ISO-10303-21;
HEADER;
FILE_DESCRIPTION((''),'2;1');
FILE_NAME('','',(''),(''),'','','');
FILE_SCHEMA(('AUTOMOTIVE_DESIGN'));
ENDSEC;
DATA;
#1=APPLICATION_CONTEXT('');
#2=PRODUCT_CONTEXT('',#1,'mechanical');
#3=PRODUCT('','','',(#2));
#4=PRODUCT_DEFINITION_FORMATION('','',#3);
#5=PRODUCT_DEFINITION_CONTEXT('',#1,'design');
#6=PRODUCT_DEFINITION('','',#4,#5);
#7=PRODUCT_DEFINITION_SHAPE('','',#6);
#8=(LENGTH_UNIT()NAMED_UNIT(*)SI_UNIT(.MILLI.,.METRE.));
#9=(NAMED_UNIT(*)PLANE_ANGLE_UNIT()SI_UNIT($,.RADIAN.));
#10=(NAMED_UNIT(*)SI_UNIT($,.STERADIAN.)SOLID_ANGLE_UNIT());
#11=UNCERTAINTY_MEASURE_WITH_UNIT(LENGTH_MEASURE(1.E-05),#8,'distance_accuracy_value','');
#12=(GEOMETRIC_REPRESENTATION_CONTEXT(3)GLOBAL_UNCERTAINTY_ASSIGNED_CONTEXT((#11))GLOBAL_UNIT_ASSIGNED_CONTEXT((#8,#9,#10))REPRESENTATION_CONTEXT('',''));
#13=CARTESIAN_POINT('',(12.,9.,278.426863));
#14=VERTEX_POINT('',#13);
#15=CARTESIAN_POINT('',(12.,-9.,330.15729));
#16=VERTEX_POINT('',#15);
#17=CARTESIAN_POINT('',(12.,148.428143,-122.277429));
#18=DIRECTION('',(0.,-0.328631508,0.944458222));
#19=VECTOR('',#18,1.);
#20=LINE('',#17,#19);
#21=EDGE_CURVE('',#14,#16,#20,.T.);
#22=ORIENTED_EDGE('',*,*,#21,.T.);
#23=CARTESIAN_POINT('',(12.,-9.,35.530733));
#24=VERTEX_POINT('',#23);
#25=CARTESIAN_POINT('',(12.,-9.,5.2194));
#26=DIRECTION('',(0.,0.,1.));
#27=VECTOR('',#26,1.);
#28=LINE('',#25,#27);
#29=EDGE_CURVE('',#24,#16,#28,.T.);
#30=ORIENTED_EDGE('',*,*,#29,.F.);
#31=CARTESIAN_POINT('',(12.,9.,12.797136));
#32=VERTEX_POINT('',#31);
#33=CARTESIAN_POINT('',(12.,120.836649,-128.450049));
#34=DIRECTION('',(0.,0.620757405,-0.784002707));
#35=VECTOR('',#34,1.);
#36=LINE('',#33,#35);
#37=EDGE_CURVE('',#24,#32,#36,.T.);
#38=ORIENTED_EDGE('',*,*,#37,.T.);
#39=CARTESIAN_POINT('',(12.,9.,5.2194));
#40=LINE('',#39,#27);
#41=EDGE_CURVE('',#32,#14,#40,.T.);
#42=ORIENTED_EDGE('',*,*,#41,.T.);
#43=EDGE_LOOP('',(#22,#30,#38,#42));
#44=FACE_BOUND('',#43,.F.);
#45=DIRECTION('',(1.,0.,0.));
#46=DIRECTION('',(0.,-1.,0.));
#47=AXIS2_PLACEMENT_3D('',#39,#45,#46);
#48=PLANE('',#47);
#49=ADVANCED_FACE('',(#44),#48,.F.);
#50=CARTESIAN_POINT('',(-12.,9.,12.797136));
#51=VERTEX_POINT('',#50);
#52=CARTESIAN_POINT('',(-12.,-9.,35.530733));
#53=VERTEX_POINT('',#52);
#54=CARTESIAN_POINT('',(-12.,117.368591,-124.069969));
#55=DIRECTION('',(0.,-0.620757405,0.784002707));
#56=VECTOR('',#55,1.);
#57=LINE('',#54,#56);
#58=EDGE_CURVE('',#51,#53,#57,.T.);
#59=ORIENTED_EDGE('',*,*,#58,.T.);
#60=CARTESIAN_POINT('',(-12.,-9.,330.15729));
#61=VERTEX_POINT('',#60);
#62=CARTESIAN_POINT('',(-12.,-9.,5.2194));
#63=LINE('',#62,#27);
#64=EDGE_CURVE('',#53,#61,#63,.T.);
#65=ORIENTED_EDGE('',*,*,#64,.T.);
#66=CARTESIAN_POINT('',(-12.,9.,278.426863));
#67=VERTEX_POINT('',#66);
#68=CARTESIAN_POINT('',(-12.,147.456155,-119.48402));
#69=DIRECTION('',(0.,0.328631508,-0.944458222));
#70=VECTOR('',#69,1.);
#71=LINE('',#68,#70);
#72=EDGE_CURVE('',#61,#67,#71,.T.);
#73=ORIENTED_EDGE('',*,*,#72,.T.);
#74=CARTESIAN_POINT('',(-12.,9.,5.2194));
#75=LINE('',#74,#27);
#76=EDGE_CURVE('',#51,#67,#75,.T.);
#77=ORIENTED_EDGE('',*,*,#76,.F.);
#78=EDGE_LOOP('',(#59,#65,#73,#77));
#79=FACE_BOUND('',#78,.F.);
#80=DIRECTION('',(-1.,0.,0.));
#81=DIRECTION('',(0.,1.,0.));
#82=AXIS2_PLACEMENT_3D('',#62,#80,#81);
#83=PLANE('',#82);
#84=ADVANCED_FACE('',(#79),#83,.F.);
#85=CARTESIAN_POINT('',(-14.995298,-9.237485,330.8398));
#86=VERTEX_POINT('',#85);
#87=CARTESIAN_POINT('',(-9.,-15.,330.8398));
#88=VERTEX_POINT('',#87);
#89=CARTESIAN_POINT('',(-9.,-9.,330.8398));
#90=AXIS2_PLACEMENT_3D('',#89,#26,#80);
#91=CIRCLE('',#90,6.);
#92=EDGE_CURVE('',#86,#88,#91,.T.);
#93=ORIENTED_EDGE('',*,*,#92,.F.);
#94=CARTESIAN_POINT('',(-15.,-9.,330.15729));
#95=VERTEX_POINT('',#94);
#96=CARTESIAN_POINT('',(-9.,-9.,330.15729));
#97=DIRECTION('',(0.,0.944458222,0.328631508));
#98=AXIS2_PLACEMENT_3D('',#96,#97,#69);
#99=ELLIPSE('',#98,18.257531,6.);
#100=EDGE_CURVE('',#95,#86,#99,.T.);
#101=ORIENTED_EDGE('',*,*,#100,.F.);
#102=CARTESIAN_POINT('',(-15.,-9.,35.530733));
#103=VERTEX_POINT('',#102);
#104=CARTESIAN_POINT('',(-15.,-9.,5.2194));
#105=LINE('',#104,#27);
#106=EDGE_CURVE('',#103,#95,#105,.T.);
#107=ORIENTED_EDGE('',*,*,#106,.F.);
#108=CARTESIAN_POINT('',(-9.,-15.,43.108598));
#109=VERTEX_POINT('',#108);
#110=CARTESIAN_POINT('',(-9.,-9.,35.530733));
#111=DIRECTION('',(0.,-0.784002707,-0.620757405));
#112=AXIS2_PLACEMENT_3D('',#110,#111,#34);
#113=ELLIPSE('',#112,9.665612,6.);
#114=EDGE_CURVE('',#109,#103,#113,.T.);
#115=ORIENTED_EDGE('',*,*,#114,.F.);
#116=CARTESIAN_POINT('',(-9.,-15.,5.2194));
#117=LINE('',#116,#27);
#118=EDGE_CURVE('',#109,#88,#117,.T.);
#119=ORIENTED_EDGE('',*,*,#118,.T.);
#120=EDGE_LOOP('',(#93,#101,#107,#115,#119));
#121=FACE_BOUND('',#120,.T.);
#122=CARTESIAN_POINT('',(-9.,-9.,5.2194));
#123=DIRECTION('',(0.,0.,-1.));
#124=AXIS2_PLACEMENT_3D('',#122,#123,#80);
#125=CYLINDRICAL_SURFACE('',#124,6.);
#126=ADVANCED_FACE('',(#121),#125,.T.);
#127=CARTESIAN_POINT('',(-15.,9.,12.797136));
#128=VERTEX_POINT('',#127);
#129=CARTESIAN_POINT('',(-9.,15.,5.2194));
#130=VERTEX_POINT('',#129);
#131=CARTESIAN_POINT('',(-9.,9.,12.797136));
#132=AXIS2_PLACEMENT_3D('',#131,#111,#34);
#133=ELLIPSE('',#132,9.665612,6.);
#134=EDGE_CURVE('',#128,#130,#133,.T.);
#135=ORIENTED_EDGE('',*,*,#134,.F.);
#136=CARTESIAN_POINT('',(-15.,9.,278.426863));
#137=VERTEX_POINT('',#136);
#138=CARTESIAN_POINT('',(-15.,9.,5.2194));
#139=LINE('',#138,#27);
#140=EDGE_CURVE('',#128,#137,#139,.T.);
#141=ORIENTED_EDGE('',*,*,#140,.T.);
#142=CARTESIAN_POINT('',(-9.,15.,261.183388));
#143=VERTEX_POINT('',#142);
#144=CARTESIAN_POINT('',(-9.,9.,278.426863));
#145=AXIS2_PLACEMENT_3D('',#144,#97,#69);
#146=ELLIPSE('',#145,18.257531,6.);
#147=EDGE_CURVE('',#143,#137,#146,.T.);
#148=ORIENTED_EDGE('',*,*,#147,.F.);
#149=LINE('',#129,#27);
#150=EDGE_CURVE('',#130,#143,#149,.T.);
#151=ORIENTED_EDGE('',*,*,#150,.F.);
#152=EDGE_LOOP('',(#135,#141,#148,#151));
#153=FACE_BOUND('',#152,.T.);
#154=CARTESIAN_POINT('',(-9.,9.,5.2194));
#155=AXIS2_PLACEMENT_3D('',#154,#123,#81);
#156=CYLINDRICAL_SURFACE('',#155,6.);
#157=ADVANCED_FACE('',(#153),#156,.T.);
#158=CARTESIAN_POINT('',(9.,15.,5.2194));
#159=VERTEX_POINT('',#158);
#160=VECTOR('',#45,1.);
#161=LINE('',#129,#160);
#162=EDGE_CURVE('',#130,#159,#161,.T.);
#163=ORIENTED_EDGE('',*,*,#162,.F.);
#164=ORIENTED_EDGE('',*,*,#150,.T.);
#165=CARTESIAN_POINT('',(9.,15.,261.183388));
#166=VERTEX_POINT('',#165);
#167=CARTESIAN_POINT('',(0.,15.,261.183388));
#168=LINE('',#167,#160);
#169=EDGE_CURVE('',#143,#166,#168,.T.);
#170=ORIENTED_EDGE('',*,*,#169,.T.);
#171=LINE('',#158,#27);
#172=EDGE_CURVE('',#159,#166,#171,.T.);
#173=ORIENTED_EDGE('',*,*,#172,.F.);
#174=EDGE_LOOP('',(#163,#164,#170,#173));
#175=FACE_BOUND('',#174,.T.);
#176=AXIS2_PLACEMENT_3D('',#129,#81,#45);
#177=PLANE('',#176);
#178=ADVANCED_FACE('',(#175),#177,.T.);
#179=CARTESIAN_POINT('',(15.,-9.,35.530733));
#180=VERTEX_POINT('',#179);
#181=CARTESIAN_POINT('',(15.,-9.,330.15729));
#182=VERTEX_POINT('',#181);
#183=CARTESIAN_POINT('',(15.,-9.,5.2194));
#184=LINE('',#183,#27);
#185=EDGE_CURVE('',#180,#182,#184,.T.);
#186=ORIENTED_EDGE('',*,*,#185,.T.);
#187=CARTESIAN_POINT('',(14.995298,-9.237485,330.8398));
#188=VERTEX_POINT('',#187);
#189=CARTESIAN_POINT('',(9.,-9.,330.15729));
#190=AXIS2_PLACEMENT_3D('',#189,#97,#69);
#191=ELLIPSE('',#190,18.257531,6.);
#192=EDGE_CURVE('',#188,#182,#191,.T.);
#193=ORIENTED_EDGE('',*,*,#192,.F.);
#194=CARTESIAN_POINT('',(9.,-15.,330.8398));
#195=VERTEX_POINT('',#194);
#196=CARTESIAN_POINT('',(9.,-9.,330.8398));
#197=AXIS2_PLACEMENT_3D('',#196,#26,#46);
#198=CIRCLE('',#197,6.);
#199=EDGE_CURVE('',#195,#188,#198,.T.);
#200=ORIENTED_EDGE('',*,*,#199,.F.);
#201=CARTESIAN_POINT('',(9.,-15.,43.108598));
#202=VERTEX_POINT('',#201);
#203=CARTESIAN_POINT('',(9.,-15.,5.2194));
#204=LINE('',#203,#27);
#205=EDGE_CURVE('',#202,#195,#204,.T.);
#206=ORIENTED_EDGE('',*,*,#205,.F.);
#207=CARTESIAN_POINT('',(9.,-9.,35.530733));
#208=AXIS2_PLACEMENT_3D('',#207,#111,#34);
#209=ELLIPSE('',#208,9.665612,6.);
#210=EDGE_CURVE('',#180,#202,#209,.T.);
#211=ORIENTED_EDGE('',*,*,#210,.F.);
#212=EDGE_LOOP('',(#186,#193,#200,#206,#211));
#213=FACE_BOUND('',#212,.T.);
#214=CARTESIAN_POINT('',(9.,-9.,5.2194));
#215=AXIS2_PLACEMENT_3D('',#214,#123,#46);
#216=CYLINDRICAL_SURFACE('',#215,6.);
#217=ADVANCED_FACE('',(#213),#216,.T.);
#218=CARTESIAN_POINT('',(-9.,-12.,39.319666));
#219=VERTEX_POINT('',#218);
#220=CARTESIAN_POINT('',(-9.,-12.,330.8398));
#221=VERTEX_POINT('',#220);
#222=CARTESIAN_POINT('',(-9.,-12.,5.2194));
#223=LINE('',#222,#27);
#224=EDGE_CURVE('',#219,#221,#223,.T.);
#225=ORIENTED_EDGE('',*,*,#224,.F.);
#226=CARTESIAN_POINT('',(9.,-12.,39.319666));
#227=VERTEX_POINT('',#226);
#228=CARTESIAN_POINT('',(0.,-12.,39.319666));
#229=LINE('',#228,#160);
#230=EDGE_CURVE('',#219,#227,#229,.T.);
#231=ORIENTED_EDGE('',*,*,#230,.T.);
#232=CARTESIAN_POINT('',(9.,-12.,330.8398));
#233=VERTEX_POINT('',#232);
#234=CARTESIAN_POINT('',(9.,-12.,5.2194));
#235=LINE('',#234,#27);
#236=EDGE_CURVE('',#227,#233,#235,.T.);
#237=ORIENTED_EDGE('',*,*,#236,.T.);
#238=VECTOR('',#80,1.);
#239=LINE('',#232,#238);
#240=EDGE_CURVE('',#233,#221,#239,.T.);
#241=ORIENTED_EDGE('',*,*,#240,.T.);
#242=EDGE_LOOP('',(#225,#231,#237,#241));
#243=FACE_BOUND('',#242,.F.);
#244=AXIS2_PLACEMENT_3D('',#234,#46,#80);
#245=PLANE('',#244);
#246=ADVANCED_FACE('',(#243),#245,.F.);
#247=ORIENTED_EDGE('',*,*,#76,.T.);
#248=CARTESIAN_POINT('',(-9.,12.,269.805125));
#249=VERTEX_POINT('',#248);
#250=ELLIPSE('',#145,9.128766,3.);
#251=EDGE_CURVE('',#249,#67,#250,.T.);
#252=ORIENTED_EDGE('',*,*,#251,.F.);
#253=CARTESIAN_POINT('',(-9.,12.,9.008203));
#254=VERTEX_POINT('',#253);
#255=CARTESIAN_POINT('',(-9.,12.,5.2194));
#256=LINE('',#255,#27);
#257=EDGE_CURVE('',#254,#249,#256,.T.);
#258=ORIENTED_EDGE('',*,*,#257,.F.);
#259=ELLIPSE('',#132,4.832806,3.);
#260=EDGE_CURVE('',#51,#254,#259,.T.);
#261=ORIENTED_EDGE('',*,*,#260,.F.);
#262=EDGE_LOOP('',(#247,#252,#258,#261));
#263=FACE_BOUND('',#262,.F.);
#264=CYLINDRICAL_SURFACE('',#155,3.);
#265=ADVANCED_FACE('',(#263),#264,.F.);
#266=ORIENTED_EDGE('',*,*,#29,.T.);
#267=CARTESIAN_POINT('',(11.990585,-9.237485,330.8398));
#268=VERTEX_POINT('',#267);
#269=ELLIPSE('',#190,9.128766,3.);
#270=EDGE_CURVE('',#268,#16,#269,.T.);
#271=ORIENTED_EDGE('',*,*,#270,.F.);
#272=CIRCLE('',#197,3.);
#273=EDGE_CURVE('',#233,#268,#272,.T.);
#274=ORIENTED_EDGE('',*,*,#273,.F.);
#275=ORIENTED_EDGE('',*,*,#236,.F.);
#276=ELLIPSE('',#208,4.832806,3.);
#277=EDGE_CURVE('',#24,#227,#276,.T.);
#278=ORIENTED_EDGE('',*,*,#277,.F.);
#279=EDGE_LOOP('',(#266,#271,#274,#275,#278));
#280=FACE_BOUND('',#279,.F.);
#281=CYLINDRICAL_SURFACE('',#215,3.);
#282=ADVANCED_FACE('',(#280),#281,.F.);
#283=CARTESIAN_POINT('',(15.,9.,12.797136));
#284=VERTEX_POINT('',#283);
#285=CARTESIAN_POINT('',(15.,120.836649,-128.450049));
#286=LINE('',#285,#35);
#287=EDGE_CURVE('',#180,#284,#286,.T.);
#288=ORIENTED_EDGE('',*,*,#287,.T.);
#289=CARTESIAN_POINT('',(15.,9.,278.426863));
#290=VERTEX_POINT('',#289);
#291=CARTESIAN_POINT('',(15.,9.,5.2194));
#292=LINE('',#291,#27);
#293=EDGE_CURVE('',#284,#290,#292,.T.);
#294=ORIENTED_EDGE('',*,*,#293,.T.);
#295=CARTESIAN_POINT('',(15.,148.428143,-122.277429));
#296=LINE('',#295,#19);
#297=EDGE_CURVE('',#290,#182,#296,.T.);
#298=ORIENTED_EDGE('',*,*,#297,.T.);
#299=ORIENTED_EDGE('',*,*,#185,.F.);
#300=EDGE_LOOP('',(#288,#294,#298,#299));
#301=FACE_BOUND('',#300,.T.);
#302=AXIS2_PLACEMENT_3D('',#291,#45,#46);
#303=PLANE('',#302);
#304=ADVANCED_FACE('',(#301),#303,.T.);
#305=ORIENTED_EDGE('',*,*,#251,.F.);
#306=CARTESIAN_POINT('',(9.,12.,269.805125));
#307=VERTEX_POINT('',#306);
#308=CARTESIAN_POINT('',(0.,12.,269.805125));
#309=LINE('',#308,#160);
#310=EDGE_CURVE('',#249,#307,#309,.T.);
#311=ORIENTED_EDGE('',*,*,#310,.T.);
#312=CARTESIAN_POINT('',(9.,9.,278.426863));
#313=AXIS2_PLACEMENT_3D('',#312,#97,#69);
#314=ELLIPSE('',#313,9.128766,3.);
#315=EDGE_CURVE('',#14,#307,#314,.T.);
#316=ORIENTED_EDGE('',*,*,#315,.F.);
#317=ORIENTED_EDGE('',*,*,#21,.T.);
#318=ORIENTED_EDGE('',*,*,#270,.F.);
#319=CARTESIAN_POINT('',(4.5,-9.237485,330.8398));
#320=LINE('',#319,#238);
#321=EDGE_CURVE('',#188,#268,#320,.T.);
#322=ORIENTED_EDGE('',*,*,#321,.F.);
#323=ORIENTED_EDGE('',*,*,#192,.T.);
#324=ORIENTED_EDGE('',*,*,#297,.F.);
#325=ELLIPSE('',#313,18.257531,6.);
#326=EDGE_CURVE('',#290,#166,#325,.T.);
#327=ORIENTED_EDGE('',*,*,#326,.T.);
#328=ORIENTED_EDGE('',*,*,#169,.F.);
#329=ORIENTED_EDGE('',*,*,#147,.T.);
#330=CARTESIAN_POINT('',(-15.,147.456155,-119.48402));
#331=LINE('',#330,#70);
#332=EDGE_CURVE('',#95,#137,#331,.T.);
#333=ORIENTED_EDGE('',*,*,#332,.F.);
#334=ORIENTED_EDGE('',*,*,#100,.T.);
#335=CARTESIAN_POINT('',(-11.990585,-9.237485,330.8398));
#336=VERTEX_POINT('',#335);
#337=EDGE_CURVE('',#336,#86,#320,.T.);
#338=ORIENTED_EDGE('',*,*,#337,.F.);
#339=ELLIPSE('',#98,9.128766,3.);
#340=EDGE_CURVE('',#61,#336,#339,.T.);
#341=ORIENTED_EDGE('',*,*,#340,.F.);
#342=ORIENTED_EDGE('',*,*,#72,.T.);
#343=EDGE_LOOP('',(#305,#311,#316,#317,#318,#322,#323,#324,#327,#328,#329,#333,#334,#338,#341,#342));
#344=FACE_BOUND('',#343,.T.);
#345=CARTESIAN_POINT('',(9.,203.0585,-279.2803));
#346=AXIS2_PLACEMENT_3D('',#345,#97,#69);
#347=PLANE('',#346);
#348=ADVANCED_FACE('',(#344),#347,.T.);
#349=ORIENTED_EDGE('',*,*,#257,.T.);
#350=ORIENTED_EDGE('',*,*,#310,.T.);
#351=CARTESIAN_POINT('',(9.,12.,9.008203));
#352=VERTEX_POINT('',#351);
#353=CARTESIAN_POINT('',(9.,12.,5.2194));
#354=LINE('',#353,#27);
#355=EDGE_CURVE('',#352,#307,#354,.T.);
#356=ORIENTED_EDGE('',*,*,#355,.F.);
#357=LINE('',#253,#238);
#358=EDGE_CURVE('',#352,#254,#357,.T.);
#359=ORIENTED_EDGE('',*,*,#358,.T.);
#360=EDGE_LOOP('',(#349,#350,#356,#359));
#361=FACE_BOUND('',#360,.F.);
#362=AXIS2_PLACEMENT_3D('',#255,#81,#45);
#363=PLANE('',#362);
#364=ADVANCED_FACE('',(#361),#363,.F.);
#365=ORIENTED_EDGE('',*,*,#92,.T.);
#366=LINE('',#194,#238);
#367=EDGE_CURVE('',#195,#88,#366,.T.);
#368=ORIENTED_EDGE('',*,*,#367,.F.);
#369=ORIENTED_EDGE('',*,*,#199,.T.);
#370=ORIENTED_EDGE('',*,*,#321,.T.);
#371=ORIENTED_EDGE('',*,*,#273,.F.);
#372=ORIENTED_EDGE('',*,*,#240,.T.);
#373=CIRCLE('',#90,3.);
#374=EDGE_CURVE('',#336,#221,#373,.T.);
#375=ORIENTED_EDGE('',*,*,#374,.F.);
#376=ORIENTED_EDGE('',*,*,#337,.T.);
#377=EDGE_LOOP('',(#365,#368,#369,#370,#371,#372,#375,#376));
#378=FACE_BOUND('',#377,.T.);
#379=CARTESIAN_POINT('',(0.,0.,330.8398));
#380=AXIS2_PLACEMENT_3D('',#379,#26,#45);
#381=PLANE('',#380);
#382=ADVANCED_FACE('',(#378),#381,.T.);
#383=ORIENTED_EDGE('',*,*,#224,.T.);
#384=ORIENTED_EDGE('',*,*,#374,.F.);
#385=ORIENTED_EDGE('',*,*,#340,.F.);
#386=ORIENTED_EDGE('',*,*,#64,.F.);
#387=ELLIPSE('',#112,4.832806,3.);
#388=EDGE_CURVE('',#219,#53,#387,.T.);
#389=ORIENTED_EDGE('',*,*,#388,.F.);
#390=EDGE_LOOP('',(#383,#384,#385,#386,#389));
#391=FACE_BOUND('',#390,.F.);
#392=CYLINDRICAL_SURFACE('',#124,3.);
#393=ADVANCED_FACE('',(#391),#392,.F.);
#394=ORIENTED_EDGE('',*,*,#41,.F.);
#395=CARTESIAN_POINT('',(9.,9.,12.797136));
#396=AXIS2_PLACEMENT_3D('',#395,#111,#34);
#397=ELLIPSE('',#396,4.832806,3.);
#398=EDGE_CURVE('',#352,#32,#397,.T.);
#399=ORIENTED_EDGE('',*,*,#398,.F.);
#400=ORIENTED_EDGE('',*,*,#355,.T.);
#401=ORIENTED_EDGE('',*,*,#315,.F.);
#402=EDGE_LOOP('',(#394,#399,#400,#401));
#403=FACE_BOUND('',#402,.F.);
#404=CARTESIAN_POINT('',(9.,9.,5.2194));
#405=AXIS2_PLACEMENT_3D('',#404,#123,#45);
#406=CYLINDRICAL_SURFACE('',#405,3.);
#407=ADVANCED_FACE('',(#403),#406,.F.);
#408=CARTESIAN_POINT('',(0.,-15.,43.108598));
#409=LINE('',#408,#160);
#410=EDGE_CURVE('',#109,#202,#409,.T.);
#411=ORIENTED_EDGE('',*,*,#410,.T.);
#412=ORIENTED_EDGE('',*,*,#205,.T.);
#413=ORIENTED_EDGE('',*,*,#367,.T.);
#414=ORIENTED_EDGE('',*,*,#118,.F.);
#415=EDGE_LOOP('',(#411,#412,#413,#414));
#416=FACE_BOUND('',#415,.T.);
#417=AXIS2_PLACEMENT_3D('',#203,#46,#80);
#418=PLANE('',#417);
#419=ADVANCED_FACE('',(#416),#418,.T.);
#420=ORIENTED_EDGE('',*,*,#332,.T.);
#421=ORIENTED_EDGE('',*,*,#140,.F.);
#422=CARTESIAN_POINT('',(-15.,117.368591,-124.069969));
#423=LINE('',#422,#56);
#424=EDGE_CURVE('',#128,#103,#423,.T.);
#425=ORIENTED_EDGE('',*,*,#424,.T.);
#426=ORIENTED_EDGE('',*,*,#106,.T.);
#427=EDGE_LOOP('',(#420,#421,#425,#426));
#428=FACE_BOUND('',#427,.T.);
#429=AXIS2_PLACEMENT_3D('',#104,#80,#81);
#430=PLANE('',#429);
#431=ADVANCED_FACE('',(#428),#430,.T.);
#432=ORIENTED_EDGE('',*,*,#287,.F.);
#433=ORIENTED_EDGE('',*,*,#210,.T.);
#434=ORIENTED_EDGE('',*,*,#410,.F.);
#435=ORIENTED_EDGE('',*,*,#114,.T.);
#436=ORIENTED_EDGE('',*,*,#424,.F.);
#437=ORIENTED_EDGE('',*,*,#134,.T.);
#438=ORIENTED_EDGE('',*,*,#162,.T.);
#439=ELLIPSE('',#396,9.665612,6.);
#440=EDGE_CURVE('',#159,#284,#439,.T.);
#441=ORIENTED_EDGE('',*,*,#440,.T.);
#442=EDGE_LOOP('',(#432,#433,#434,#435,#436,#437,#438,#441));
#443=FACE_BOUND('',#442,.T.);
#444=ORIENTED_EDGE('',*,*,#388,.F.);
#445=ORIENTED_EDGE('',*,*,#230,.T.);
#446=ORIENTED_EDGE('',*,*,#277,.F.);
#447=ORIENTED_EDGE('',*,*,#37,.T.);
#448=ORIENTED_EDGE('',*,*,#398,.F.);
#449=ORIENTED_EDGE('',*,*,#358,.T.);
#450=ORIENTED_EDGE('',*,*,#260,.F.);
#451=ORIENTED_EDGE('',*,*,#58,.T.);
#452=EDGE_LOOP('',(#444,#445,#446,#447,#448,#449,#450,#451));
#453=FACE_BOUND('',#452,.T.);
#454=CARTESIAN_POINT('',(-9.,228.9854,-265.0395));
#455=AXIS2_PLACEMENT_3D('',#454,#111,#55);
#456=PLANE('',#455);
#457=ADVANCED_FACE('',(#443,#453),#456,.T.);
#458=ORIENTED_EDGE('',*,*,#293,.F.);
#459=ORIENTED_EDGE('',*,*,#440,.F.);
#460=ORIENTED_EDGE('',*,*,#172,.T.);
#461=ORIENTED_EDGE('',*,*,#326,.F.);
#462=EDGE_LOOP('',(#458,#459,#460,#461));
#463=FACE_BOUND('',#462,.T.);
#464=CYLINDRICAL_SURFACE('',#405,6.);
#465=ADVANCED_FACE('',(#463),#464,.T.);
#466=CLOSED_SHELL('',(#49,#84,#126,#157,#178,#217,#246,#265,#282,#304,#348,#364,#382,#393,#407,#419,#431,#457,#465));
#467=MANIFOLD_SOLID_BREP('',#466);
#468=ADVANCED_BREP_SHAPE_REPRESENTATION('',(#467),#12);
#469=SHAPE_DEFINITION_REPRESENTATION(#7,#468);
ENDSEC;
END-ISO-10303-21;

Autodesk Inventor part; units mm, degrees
ref_plane "Start Plane" through (0, 0, 5.2194) normal (0, 0, 1) x (1, 0, 0)
ref_plane "End Plane" through (0, 0, 330.8397) normal (0, 0, 1) x (1, 0, 0)
sketch "Sketch" plane through (0, 0, 0) normal (0, 0, 1) x (1, 0, 0)
  line L0 (-15, -9) -> (-15, 9)
  line L1 (-9, 15) -> (9, 15)
  line L2 (15, 9) -> (15, -9)
  line L3 (9, -15) -> (-9, -15)
  arc A0 (-15, -9) -> (-9, -15) centre (-9, -9) ccw
  arc A1 (-9, 15) -> (-15, 9) centre (-9, 9) ccw
  arc A2 (15, 9) -> (9, 15) centre (9, 9) ccw
  arc A3 (9, -15) -> (15, -9) centre (9, -9) ccw
  arc A4 (-9, 12) -> (-12, 9) centre (-9, 9) ccw
  line L4 (-9, 12) -> (9, 12)
  arc A5 (12, 9) -> (9, 12) centre (9, 9) ccw
  line L5 (12, 9) -> (12, -9)
  arc A6 (9, -12) -> (12, -9) centre (9, -9) ccw
  line L6 (9, -12) -> (-9, -12)
  arc A7 (-12, -9) -> (-9, -12) centre (-9, -9) ccw
  line L7 (-12, -9) -> (-12, 9)
  line L8 (0, 22.7397) -> (0, -22.7397) construction
  line L9 (-22.7397, 0) -> (22.7397, 0) construction
  dimension "d7" = 6
  dimension "d10" = 30
  dimension "d11" = 30
  dimension "d12" = 3
  dimension "d15" = 15
  dimension "d16" = 15
extrude "Body" add sketch "Sketch" along normal up to surface (325.6204 mm away) from surface at 5.2194
sketch "Sketch3" plane through (0, 0, 0) normal (0, 0, 1) x (1, 0, 0)
  line L0 (0, 0) -> (10, 0)
ref_plane "Work Plane3" through (0, 0, 0) normal (0, -1, 0) x (1, 0, 0)
ref_plane "Work Plane4" through (9, 203.0585, -279.2803) normal (0, 0.9444582, 0.3286315) x (1, 0, 0)
split "Split1" plane through (9, 203.0585, -279.2803) removes the side toward (0, 0.9444582, 0.3286315)
ref_plane "Work Plane5" through (-9, 228.9854, -265.0395) normal (0, -0.7840027, -0.6207574) x (1, 0, 0)
split "Split2" plane through (-9, 228.9854, -265.0395) removes the side toward (0, -0.7840027, -0.6207574)
sketch "Sketch4" plane through (0, 0, 0) normal (0, -1, 0) x (1, 0, 0)
  line L0 (-2, 5.2194) -> (12, 5.2194) projected
  line L1 (-2, 330.8397) -> (12, 330.8397) projected
  dimension "d18" = 325.6204
equation "\"d7\" = G_IR"
equation "\"d10\" = G_H"
equation "\"d11\" = G_W"
equation "\"d12\" = G_T"
equation "\"d15\" = 0.5 * d10"
equation "\"d16\" = 0.5 * d11"
equation "\"d3\" = G_L"
equation "\"G_W\" = 30"
equation "\"G_H\" = 30"
equation "\"G_T\" = 3"
equation "\"G_IR\" = 6"
equation "\"G_L\" = d18"
equation "\"G_OFFSET_START\" = -5.21936"
equation "\"G_OFFSET_END\" = -19.09635"
equation "\"d13\" = -G_OFFSET_START"
equation "\"d14\" = G_OFFSET_END + B_L"
equation "\"B_L\" = 349.93607"
properties part number "DIN EN 10219-2 - 30 x 30 x 3  - 325.62" material "Steel, Mild"
